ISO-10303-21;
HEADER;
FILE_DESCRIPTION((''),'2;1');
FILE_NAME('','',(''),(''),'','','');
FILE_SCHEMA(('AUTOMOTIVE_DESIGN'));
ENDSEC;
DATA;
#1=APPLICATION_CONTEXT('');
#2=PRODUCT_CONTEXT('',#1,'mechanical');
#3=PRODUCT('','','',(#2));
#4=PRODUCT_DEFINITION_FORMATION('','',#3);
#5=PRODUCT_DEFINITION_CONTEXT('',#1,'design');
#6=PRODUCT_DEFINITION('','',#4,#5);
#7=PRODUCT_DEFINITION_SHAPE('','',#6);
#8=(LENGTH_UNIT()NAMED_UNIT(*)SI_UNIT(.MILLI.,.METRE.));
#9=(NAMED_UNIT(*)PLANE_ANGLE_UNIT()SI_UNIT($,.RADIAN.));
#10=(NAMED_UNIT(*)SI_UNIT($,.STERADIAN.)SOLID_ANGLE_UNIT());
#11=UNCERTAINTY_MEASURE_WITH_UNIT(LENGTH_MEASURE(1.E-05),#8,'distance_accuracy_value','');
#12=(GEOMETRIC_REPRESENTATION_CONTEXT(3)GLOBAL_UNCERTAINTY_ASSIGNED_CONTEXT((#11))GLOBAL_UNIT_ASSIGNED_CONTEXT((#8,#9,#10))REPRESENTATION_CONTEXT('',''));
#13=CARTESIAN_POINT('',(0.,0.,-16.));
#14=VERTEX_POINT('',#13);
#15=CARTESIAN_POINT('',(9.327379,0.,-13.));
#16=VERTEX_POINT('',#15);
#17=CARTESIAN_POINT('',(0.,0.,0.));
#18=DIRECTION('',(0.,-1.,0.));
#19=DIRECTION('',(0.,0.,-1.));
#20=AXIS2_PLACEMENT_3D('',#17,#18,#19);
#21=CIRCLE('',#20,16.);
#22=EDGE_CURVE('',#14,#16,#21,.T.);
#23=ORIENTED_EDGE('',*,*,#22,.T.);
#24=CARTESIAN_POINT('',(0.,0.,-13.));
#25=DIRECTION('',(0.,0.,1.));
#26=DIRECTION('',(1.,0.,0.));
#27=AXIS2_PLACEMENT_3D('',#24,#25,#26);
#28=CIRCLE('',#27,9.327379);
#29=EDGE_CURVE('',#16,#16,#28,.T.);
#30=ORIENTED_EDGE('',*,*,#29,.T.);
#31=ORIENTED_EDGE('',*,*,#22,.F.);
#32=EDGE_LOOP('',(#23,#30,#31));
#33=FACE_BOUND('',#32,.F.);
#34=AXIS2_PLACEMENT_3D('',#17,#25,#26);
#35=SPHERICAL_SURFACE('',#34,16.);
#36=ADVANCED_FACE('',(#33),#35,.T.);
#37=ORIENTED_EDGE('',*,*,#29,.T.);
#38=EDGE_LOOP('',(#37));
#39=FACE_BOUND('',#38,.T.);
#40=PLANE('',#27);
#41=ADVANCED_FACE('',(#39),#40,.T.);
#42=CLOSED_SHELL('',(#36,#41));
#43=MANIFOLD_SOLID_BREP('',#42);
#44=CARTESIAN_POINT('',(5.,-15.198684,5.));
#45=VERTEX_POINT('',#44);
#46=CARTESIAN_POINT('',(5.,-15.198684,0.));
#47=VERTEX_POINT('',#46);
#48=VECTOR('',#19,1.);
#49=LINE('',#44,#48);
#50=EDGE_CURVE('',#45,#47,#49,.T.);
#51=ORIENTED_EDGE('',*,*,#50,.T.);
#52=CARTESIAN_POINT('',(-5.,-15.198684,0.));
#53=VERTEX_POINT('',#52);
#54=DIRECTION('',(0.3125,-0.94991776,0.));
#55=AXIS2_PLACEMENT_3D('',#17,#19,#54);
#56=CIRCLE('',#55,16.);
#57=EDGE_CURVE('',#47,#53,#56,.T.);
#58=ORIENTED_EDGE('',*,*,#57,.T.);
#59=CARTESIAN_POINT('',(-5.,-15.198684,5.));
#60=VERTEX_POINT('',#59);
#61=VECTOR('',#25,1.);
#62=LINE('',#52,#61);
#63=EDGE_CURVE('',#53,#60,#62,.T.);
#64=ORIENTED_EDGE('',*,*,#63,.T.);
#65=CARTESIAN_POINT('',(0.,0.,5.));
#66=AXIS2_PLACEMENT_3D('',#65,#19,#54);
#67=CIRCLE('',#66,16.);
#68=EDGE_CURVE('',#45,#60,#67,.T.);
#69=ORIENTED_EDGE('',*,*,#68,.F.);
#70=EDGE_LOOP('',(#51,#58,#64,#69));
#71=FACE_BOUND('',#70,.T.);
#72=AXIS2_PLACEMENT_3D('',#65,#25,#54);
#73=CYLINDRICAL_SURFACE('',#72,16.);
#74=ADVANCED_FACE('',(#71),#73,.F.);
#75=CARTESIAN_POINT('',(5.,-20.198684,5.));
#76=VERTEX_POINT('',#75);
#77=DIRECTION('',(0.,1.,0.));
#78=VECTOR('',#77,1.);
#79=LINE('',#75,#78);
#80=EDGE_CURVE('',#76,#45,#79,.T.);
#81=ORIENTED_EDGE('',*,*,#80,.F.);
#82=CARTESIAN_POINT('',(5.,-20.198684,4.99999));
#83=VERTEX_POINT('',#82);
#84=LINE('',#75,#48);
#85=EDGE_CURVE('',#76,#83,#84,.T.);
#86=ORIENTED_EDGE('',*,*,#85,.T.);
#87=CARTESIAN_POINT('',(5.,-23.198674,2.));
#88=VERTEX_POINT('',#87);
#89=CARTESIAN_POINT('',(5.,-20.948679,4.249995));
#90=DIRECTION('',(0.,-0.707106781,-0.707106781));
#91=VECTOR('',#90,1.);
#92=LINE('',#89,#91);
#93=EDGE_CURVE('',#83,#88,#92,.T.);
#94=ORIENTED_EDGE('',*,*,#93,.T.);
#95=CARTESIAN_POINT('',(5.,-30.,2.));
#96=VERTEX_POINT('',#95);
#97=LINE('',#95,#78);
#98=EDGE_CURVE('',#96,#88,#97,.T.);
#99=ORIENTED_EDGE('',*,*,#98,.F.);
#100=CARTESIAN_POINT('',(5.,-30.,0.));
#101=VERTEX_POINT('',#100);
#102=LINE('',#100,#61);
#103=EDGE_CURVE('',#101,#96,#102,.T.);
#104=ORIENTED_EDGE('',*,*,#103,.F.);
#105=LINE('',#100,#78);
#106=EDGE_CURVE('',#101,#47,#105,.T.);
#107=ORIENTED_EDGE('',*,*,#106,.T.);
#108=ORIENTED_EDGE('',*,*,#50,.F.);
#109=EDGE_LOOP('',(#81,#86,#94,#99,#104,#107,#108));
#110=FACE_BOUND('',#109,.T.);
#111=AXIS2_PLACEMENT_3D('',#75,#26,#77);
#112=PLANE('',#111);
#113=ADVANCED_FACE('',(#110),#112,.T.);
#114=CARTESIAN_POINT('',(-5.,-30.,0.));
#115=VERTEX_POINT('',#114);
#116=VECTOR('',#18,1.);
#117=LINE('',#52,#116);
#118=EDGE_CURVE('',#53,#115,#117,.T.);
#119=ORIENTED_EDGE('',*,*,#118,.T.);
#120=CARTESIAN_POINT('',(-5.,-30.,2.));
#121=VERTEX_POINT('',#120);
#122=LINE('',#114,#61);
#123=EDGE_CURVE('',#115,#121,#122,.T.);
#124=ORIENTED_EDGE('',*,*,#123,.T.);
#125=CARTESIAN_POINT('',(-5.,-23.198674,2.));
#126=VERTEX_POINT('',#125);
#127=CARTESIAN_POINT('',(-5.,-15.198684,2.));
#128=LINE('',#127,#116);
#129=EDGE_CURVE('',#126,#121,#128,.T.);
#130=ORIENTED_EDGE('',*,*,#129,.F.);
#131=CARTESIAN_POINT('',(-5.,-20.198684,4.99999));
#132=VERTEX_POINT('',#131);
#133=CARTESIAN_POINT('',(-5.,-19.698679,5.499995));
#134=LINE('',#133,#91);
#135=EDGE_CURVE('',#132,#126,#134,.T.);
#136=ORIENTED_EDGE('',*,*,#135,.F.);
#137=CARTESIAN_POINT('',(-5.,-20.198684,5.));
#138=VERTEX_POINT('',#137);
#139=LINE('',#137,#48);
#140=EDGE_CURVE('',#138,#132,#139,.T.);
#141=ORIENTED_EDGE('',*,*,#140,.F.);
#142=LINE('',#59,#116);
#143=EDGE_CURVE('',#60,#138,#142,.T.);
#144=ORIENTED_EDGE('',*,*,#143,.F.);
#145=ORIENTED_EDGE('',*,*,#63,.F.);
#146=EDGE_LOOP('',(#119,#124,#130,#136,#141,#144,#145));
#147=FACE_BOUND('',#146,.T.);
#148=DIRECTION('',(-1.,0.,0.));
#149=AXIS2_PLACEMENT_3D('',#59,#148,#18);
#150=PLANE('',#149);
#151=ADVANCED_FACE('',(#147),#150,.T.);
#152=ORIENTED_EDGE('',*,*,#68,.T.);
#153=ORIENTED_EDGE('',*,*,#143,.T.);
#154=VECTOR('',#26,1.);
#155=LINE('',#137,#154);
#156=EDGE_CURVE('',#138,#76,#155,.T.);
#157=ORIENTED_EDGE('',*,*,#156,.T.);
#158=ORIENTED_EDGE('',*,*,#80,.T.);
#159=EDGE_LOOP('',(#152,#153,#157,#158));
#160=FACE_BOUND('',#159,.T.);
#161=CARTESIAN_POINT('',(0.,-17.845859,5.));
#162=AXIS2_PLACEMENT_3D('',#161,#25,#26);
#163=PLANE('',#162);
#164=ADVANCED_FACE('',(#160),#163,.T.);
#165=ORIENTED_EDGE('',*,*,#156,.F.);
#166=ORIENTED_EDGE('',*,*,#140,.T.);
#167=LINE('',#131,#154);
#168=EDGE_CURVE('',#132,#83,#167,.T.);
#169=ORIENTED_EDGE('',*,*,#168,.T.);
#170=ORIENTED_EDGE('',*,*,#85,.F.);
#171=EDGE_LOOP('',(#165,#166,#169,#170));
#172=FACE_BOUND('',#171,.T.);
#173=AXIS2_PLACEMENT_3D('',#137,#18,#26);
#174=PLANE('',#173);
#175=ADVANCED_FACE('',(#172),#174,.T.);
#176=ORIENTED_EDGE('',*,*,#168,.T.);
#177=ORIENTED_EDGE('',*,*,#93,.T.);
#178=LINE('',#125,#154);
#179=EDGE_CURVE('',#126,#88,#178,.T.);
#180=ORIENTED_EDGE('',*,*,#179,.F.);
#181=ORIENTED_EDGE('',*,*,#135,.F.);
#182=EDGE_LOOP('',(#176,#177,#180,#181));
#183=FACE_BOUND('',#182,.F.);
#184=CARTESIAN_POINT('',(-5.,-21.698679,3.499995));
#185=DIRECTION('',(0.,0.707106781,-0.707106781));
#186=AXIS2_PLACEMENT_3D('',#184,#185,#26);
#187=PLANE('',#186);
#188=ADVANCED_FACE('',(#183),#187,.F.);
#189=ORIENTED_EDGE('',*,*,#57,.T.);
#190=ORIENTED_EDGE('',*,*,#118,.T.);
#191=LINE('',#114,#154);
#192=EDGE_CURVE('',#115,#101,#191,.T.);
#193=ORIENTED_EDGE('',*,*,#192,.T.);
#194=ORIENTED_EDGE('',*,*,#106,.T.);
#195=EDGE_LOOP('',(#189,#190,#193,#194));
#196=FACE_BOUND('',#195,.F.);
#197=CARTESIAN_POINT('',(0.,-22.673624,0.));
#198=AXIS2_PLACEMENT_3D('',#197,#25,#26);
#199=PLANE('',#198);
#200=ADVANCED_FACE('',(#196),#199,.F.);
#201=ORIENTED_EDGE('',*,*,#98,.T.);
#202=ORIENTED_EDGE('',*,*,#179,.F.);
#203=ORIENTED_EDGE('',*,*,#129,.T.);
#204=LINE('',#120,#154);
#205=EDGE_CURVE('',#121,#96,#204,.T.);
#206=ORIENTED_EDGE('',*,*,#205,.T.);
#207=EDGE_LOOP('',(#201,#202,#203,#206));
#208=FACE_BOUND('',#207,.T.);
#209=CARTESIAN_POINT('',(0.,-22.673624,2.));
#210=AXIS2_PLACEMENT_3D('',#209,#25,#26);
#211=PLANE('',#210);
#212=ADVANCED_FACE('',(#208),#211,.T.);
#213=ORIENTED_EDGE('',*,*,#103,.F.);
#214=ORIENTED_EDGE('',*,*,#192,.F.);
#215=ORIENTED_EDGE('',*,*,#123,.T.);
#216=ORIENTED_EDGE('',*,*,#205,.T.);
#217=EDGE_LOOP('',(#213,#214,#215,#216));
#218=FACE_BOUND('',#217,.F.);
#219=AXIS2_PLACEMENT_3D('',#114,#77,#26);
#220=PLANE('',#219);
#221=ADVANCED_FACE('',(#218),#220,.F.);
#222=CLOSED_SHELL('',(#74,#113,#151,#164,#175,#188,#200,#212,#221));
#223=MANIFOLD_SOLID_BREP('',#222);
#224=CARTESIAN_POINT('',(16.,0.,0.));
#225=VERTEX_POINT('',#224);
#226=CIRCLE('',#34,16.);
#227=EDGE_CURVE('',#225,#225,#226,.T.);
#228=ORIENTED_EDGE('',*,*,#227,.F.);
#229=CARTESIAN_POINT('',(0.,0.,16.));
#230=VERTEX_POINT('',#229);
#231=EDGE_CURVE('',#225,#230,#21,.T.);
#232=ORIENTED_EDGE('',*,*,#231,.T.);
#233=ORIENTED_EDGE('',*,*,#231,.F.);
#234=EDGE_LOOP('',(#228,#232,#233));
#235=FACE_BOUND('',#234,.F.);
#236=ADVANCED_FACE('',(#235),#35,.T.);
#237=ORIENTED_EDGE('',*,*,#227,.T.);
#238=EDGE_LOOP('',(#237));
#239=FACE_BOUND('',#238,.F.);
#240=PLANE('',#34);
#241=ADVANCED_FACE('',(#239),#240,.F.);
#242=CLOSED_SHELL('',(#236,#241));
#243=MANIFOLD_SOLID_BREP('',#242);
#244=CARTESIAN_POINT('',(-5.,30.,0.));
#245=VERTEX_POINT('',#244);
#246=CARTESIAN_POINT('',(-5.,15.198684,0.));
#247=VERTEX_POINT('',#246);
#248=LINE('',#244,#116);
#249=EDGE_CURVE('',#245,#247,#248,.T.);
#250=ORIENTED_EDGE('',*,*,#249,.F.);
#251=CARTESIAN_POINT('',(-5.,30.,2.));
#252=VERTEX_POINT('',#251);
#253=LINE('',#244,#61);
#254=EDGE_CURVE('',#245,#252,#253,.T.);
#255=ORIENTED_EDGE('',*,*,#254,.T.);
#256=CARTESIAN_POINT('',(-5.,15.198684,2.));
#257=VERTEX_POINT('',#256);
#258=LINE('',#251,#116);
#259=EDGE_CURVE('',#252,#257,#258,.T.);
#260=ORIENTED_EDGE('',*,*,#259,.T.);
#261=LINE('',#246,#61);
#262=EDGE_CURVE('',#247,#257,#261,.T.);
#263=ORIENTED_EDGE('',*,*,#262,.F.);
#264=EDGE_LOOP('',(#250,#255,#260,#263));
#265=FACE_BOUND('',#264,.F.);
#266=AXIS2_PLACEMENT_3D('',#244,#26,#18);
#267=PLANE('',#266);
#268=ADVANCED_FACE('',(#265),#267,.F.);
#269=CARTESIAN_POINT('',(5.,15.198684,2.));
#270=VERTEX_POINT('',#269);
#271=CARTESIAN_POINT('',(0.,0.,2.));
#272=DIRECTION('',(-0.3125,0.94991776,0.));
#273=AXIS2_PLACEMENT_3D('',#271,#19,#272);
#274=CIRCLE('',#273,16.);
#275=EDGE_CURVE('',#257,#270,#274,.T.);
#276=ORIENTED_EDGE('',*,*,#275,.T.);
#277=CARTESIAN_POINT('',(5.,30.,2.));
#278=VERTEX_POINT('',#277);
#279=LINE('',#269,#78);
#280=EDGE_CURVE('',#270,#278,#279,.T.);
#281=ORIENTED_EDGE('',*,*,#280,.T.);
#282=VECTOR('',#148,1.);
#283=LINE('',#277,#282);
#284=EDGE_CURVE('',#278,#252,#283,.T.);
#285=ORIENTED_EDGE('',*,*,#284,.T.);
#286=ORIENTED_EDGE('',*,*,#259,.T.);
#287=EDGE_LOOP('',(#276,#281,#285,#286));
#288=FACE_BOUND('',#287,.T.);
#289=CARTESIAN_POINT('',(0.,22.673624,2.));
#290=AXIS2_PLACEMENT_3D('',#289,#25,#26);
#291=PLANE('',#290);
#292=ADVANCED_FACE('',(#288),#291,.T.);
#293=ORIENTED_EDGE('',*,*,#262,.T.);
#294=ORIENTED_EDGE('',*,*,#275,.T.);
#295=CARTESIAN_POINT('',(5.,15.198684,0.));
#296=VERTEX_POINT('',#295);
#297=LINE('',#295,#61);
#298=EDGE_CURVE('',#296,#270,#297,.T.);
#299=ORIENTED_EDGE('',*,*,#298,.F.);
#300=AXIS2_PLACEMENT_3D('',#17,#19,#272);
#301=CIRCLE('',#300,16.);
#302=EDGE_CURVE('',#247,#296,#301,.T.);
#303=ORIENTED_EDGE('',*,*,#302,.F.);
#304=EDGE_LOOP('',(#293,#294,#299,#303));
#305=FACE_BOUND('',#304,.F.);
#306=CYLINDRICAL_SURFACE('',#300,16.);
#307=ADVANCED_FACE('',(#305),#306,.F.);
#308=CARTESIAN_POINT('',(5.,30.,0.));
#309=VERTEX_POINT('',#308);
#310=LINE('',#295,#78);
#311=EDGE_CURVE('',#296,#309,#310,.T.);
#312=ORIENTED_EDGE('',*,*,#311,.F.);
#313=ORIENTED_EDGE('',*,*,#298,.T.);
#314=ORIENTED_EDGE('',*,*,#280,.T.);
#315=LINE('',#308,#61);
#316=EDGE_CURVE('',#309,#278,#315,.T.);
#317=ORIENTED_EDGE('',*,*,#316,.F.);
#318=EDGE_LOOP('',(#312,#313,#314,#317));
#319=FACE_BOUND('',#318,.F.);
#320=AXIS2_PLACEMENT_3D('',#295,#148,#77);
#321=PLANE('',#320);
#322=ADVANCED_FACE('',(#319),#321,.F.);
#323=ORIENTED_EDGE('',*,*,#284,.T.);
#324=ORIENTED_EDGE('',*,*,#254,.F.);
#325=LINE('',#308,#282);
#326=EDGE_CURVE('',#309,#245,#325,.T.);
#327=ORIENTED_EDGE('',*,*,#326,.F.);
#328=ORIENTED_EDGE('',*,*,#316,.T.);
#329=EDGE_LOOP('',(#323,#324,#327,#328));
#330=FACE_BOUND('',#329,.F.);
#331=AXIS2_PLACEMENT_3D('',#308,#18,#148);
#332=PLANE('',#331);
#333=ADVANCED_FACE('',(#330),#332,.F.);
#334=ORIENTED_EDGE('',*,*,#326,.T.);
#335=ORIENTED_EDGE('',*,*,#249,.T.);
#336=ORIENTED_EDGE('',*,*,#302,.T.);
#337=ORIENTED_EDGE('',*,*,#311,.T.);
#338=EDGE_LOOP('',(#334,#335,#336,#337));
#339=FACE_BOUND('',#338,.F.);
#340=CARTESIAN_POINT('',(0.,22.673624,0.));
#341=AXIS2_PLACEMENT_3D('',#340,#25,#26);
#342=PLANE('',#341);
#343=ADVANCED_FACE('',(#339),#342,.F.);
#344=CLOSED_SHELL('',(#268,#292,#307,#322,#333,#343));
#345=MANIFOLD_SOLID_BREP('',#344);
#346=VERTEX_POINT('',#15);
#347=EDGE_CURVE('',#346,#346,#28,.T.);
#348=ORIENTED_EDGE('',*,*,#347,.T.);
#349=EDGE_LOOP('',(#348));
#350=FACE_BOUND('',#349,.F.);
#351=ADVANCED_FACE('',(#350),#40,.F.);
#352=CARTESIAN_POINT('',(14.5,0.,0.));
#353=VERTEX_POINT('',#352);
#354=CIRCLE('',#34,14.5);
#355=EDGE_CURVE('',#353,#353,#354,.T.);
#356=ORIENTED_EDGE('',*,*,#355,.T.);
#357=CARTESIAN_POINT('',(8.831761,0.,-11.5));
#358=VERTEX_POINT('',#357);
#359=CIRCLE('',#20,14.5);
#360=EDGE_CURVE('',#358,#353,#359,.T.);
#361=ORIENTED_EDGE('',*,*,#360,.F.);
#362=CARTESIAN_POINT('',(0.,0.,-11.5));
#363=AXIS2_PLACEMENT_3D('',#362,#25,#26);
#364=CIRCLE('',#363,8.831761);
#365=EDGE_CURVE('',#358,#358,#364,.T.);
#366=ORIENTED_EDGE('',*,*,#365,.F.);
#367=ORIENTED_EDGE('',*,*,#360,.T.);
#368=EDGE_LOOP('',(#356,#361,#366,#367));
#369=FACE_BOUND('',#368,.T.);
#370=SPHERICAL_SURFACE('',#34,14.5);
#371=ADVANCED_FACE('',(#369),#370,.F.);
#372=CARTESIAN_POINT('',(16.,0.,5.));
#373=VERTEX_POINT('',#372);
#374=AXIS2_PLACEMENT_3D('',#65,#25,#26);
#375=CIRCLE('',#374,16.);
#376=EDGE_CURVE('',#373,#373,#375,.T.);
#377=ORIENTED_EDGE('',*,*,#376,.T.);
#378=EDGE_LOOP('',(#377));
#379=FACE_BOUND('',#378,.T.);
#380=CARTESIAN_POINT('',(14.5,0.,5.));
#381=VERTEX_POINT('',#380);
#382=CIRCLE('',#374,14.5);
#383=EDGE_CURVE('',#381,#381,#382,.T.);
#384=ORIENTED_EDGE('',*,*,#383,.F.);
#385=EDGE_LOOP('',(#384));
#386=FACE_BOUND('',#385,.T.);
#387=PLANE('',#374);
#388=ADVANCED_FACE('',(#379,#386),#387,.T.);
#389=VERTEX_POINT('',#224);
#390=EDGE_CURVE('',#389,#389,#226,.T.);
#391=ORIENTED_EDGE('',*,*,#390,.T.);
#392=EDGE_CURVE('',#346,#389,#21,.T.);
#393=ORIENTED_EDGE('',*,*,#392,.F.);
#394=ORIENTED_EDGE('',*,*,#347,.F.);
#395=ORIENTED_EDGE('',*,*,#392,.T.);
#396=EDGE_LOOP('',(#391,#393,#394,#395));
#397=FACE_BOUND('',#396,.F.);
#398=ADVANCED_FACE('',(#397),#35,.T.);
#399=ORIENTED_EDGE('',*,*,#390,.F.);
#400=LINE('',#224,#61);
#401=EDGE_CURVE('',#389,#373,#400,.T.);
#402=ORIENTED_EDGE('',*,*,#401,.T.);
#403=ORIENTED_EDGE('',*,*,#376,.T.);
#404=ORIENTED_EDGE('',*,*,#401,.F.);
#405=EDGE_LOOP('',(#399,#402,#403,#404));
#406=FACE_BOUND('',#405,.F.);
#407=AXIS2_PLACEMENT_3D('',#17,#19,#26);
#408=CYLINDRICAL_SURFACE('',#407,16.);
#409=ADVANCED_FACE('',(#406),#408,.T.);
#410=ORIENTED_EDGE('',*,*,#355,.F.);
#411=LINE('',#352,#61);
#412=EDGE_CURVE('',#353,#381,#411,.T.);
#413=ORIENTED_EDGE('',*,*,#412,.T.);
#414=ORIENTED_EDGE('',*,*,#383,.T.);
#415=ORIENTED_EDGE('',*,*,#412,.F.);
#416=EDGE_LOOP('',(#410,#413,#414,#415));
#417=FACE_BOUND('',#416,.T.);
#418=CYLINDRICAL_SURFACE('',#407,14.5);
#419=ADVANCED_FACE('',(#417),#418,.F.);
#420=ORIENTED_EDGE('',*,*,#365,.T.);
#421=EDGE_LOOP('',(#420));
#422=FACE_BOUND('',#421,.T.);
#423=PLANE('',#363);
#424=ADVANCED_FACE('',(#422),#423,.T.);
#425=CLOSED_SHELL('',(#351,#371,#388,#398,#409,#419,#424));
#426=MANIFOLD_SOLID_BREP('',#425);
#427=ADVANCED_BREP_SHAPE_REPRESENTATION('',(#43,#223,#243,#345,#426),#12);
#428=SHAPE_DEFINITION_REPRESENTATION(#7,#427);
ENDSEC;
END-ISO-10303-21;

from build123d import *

# Parameters (mm, degrees)
F2_R      = 46.2010562837
F3_DEPTH  = 25
F5_R      = 29.0059042903
F6_DEPTH  = 3
F9_T      = -1.5
F10_R     = 16
F10_R_2   = 14.5
F11_DEPTH = 5
F13_DEPTH = 2
F15_DEPTH = 3
F16_SIZE  = 2.99999


# Not quite as in the source:
# - a fillet or chamfer is up to 0.001 mm smaller than in the source, because OpenCascade refuses the exact size


with BuildPart() as f1:
    # F0 (on Front) → F1 (revolve)
    with BuildSketch(Plane.XZ):
        with BuildLine():
            Line((0, 16), (0, -16))
            ThreePointArc((0, -16), (16, 0), (0, 16))
        make_face()
    revolve(axis=Axis((0, 0, 0), (0, 0, -1)))

    # F2 (on Top) → F3 (cut)
    with BuildSketch(Plane.XY):
        Circle(F2_R)
    extrude(amount=F3_DEPTH, mode=Mode.SUBTRACT)

    # F5 (on offset) → F6 (cut)
    with BuildSketch(Plane.XY.offset(-16)):
        Circle(F5_R)
    extrude(amount=F6_DEPTH, mode=Mode.SUBTRACT)


with BuildPart() as f7:
    # F0 (on Front) → F7 (revolve)
    with BuildSketch(Plane.XZ):
        with BuildLine():
            Line((0, 16), (0, -16))
            ThreePointArc((0, -16), (16, 0), (0, 16))
        make_face()
    revolve(axis=Axis((0, 0, 0), (0, 0, -1)))

    # F8: cut F1
    add(f1.part, mode=Mode.SUBTRACT)


with BuildPart() as f1_1:
    add(f1.part)

    # F9
    f9_openings = [f1_1.faces().sort_by_distance(p)[0] for p in [
        (0, 0, 0),
    ]]
    offset(amount=F9_T, openings=f9_openings)

    # F10 (on face) → F11 (join)
    with BuildSketch(Plane.XY):
        Circle(F10_R)
        Circle(F10_R_2, mode=Mode.SUBTRACT)
    extrude(amount=F11_DEPTH)


with BuildPart() as f13:
    # F12 (on Top) → F13 (new body)
    with BuildSketch(Plane.XY):
        with BuildLine():
            Line((5, -30), (5, -15.1986841536))
            ThreePointArc((5, -15.1986841536), (0, -16), (-5, -15.1986841536))
            Line((-5, -15.1986841536), (-5, -30))
            Line((-5, -30), (5, -30))
        make_face()
    extrude(amount=F13_DEPTH)

    # F14 (on face) → F15 (join, through all)
    with BuildSketch(Plane.XY.offset(5)):
        with BuildLine():
            ThreePointArc((5, -15.1986841536), (0, -16), (-5, -15.1986841536))
            Line((-5, -15.1986841536), (-5, -20.1986841536))
            Line((-5, -20.1986841536), (5, -20.1986841536))
            Line((5, -20.1986841536), (5, -15.1986841536))
        make_face()
    extrude(amount=-F15_DEPTH)

    # F16 (size 3 in the source; OpenCascade refuses exactly that, so slightly less here)
    f16_edges = [f13.edges().sort_by_distance(p)[0] for p in [
        (0, -20.198684, 2),
    ]]
    chamfer(f16_edges, length=F16_SIZE)


with BuildPart() as f13b:
    # F12 (on Top) → F13, piece 2 (new body)
    with BuildSketch(Plane.XY):
        with BuildLine():
            ThreePointArc((-5, 15.1986841536), (0, 16), (5, 15.1986841536))
            Line((5, 15.1986841536), (5, 30))
            Line((5, 30), (-5, 30))
            Line((-5, 30), (-5, 15.1986841536))
        make_face()
    extrude(amount=F13_DEPTH)


solid = Compound([f7.part, f1_1.part, f13.part, f13b.part])
